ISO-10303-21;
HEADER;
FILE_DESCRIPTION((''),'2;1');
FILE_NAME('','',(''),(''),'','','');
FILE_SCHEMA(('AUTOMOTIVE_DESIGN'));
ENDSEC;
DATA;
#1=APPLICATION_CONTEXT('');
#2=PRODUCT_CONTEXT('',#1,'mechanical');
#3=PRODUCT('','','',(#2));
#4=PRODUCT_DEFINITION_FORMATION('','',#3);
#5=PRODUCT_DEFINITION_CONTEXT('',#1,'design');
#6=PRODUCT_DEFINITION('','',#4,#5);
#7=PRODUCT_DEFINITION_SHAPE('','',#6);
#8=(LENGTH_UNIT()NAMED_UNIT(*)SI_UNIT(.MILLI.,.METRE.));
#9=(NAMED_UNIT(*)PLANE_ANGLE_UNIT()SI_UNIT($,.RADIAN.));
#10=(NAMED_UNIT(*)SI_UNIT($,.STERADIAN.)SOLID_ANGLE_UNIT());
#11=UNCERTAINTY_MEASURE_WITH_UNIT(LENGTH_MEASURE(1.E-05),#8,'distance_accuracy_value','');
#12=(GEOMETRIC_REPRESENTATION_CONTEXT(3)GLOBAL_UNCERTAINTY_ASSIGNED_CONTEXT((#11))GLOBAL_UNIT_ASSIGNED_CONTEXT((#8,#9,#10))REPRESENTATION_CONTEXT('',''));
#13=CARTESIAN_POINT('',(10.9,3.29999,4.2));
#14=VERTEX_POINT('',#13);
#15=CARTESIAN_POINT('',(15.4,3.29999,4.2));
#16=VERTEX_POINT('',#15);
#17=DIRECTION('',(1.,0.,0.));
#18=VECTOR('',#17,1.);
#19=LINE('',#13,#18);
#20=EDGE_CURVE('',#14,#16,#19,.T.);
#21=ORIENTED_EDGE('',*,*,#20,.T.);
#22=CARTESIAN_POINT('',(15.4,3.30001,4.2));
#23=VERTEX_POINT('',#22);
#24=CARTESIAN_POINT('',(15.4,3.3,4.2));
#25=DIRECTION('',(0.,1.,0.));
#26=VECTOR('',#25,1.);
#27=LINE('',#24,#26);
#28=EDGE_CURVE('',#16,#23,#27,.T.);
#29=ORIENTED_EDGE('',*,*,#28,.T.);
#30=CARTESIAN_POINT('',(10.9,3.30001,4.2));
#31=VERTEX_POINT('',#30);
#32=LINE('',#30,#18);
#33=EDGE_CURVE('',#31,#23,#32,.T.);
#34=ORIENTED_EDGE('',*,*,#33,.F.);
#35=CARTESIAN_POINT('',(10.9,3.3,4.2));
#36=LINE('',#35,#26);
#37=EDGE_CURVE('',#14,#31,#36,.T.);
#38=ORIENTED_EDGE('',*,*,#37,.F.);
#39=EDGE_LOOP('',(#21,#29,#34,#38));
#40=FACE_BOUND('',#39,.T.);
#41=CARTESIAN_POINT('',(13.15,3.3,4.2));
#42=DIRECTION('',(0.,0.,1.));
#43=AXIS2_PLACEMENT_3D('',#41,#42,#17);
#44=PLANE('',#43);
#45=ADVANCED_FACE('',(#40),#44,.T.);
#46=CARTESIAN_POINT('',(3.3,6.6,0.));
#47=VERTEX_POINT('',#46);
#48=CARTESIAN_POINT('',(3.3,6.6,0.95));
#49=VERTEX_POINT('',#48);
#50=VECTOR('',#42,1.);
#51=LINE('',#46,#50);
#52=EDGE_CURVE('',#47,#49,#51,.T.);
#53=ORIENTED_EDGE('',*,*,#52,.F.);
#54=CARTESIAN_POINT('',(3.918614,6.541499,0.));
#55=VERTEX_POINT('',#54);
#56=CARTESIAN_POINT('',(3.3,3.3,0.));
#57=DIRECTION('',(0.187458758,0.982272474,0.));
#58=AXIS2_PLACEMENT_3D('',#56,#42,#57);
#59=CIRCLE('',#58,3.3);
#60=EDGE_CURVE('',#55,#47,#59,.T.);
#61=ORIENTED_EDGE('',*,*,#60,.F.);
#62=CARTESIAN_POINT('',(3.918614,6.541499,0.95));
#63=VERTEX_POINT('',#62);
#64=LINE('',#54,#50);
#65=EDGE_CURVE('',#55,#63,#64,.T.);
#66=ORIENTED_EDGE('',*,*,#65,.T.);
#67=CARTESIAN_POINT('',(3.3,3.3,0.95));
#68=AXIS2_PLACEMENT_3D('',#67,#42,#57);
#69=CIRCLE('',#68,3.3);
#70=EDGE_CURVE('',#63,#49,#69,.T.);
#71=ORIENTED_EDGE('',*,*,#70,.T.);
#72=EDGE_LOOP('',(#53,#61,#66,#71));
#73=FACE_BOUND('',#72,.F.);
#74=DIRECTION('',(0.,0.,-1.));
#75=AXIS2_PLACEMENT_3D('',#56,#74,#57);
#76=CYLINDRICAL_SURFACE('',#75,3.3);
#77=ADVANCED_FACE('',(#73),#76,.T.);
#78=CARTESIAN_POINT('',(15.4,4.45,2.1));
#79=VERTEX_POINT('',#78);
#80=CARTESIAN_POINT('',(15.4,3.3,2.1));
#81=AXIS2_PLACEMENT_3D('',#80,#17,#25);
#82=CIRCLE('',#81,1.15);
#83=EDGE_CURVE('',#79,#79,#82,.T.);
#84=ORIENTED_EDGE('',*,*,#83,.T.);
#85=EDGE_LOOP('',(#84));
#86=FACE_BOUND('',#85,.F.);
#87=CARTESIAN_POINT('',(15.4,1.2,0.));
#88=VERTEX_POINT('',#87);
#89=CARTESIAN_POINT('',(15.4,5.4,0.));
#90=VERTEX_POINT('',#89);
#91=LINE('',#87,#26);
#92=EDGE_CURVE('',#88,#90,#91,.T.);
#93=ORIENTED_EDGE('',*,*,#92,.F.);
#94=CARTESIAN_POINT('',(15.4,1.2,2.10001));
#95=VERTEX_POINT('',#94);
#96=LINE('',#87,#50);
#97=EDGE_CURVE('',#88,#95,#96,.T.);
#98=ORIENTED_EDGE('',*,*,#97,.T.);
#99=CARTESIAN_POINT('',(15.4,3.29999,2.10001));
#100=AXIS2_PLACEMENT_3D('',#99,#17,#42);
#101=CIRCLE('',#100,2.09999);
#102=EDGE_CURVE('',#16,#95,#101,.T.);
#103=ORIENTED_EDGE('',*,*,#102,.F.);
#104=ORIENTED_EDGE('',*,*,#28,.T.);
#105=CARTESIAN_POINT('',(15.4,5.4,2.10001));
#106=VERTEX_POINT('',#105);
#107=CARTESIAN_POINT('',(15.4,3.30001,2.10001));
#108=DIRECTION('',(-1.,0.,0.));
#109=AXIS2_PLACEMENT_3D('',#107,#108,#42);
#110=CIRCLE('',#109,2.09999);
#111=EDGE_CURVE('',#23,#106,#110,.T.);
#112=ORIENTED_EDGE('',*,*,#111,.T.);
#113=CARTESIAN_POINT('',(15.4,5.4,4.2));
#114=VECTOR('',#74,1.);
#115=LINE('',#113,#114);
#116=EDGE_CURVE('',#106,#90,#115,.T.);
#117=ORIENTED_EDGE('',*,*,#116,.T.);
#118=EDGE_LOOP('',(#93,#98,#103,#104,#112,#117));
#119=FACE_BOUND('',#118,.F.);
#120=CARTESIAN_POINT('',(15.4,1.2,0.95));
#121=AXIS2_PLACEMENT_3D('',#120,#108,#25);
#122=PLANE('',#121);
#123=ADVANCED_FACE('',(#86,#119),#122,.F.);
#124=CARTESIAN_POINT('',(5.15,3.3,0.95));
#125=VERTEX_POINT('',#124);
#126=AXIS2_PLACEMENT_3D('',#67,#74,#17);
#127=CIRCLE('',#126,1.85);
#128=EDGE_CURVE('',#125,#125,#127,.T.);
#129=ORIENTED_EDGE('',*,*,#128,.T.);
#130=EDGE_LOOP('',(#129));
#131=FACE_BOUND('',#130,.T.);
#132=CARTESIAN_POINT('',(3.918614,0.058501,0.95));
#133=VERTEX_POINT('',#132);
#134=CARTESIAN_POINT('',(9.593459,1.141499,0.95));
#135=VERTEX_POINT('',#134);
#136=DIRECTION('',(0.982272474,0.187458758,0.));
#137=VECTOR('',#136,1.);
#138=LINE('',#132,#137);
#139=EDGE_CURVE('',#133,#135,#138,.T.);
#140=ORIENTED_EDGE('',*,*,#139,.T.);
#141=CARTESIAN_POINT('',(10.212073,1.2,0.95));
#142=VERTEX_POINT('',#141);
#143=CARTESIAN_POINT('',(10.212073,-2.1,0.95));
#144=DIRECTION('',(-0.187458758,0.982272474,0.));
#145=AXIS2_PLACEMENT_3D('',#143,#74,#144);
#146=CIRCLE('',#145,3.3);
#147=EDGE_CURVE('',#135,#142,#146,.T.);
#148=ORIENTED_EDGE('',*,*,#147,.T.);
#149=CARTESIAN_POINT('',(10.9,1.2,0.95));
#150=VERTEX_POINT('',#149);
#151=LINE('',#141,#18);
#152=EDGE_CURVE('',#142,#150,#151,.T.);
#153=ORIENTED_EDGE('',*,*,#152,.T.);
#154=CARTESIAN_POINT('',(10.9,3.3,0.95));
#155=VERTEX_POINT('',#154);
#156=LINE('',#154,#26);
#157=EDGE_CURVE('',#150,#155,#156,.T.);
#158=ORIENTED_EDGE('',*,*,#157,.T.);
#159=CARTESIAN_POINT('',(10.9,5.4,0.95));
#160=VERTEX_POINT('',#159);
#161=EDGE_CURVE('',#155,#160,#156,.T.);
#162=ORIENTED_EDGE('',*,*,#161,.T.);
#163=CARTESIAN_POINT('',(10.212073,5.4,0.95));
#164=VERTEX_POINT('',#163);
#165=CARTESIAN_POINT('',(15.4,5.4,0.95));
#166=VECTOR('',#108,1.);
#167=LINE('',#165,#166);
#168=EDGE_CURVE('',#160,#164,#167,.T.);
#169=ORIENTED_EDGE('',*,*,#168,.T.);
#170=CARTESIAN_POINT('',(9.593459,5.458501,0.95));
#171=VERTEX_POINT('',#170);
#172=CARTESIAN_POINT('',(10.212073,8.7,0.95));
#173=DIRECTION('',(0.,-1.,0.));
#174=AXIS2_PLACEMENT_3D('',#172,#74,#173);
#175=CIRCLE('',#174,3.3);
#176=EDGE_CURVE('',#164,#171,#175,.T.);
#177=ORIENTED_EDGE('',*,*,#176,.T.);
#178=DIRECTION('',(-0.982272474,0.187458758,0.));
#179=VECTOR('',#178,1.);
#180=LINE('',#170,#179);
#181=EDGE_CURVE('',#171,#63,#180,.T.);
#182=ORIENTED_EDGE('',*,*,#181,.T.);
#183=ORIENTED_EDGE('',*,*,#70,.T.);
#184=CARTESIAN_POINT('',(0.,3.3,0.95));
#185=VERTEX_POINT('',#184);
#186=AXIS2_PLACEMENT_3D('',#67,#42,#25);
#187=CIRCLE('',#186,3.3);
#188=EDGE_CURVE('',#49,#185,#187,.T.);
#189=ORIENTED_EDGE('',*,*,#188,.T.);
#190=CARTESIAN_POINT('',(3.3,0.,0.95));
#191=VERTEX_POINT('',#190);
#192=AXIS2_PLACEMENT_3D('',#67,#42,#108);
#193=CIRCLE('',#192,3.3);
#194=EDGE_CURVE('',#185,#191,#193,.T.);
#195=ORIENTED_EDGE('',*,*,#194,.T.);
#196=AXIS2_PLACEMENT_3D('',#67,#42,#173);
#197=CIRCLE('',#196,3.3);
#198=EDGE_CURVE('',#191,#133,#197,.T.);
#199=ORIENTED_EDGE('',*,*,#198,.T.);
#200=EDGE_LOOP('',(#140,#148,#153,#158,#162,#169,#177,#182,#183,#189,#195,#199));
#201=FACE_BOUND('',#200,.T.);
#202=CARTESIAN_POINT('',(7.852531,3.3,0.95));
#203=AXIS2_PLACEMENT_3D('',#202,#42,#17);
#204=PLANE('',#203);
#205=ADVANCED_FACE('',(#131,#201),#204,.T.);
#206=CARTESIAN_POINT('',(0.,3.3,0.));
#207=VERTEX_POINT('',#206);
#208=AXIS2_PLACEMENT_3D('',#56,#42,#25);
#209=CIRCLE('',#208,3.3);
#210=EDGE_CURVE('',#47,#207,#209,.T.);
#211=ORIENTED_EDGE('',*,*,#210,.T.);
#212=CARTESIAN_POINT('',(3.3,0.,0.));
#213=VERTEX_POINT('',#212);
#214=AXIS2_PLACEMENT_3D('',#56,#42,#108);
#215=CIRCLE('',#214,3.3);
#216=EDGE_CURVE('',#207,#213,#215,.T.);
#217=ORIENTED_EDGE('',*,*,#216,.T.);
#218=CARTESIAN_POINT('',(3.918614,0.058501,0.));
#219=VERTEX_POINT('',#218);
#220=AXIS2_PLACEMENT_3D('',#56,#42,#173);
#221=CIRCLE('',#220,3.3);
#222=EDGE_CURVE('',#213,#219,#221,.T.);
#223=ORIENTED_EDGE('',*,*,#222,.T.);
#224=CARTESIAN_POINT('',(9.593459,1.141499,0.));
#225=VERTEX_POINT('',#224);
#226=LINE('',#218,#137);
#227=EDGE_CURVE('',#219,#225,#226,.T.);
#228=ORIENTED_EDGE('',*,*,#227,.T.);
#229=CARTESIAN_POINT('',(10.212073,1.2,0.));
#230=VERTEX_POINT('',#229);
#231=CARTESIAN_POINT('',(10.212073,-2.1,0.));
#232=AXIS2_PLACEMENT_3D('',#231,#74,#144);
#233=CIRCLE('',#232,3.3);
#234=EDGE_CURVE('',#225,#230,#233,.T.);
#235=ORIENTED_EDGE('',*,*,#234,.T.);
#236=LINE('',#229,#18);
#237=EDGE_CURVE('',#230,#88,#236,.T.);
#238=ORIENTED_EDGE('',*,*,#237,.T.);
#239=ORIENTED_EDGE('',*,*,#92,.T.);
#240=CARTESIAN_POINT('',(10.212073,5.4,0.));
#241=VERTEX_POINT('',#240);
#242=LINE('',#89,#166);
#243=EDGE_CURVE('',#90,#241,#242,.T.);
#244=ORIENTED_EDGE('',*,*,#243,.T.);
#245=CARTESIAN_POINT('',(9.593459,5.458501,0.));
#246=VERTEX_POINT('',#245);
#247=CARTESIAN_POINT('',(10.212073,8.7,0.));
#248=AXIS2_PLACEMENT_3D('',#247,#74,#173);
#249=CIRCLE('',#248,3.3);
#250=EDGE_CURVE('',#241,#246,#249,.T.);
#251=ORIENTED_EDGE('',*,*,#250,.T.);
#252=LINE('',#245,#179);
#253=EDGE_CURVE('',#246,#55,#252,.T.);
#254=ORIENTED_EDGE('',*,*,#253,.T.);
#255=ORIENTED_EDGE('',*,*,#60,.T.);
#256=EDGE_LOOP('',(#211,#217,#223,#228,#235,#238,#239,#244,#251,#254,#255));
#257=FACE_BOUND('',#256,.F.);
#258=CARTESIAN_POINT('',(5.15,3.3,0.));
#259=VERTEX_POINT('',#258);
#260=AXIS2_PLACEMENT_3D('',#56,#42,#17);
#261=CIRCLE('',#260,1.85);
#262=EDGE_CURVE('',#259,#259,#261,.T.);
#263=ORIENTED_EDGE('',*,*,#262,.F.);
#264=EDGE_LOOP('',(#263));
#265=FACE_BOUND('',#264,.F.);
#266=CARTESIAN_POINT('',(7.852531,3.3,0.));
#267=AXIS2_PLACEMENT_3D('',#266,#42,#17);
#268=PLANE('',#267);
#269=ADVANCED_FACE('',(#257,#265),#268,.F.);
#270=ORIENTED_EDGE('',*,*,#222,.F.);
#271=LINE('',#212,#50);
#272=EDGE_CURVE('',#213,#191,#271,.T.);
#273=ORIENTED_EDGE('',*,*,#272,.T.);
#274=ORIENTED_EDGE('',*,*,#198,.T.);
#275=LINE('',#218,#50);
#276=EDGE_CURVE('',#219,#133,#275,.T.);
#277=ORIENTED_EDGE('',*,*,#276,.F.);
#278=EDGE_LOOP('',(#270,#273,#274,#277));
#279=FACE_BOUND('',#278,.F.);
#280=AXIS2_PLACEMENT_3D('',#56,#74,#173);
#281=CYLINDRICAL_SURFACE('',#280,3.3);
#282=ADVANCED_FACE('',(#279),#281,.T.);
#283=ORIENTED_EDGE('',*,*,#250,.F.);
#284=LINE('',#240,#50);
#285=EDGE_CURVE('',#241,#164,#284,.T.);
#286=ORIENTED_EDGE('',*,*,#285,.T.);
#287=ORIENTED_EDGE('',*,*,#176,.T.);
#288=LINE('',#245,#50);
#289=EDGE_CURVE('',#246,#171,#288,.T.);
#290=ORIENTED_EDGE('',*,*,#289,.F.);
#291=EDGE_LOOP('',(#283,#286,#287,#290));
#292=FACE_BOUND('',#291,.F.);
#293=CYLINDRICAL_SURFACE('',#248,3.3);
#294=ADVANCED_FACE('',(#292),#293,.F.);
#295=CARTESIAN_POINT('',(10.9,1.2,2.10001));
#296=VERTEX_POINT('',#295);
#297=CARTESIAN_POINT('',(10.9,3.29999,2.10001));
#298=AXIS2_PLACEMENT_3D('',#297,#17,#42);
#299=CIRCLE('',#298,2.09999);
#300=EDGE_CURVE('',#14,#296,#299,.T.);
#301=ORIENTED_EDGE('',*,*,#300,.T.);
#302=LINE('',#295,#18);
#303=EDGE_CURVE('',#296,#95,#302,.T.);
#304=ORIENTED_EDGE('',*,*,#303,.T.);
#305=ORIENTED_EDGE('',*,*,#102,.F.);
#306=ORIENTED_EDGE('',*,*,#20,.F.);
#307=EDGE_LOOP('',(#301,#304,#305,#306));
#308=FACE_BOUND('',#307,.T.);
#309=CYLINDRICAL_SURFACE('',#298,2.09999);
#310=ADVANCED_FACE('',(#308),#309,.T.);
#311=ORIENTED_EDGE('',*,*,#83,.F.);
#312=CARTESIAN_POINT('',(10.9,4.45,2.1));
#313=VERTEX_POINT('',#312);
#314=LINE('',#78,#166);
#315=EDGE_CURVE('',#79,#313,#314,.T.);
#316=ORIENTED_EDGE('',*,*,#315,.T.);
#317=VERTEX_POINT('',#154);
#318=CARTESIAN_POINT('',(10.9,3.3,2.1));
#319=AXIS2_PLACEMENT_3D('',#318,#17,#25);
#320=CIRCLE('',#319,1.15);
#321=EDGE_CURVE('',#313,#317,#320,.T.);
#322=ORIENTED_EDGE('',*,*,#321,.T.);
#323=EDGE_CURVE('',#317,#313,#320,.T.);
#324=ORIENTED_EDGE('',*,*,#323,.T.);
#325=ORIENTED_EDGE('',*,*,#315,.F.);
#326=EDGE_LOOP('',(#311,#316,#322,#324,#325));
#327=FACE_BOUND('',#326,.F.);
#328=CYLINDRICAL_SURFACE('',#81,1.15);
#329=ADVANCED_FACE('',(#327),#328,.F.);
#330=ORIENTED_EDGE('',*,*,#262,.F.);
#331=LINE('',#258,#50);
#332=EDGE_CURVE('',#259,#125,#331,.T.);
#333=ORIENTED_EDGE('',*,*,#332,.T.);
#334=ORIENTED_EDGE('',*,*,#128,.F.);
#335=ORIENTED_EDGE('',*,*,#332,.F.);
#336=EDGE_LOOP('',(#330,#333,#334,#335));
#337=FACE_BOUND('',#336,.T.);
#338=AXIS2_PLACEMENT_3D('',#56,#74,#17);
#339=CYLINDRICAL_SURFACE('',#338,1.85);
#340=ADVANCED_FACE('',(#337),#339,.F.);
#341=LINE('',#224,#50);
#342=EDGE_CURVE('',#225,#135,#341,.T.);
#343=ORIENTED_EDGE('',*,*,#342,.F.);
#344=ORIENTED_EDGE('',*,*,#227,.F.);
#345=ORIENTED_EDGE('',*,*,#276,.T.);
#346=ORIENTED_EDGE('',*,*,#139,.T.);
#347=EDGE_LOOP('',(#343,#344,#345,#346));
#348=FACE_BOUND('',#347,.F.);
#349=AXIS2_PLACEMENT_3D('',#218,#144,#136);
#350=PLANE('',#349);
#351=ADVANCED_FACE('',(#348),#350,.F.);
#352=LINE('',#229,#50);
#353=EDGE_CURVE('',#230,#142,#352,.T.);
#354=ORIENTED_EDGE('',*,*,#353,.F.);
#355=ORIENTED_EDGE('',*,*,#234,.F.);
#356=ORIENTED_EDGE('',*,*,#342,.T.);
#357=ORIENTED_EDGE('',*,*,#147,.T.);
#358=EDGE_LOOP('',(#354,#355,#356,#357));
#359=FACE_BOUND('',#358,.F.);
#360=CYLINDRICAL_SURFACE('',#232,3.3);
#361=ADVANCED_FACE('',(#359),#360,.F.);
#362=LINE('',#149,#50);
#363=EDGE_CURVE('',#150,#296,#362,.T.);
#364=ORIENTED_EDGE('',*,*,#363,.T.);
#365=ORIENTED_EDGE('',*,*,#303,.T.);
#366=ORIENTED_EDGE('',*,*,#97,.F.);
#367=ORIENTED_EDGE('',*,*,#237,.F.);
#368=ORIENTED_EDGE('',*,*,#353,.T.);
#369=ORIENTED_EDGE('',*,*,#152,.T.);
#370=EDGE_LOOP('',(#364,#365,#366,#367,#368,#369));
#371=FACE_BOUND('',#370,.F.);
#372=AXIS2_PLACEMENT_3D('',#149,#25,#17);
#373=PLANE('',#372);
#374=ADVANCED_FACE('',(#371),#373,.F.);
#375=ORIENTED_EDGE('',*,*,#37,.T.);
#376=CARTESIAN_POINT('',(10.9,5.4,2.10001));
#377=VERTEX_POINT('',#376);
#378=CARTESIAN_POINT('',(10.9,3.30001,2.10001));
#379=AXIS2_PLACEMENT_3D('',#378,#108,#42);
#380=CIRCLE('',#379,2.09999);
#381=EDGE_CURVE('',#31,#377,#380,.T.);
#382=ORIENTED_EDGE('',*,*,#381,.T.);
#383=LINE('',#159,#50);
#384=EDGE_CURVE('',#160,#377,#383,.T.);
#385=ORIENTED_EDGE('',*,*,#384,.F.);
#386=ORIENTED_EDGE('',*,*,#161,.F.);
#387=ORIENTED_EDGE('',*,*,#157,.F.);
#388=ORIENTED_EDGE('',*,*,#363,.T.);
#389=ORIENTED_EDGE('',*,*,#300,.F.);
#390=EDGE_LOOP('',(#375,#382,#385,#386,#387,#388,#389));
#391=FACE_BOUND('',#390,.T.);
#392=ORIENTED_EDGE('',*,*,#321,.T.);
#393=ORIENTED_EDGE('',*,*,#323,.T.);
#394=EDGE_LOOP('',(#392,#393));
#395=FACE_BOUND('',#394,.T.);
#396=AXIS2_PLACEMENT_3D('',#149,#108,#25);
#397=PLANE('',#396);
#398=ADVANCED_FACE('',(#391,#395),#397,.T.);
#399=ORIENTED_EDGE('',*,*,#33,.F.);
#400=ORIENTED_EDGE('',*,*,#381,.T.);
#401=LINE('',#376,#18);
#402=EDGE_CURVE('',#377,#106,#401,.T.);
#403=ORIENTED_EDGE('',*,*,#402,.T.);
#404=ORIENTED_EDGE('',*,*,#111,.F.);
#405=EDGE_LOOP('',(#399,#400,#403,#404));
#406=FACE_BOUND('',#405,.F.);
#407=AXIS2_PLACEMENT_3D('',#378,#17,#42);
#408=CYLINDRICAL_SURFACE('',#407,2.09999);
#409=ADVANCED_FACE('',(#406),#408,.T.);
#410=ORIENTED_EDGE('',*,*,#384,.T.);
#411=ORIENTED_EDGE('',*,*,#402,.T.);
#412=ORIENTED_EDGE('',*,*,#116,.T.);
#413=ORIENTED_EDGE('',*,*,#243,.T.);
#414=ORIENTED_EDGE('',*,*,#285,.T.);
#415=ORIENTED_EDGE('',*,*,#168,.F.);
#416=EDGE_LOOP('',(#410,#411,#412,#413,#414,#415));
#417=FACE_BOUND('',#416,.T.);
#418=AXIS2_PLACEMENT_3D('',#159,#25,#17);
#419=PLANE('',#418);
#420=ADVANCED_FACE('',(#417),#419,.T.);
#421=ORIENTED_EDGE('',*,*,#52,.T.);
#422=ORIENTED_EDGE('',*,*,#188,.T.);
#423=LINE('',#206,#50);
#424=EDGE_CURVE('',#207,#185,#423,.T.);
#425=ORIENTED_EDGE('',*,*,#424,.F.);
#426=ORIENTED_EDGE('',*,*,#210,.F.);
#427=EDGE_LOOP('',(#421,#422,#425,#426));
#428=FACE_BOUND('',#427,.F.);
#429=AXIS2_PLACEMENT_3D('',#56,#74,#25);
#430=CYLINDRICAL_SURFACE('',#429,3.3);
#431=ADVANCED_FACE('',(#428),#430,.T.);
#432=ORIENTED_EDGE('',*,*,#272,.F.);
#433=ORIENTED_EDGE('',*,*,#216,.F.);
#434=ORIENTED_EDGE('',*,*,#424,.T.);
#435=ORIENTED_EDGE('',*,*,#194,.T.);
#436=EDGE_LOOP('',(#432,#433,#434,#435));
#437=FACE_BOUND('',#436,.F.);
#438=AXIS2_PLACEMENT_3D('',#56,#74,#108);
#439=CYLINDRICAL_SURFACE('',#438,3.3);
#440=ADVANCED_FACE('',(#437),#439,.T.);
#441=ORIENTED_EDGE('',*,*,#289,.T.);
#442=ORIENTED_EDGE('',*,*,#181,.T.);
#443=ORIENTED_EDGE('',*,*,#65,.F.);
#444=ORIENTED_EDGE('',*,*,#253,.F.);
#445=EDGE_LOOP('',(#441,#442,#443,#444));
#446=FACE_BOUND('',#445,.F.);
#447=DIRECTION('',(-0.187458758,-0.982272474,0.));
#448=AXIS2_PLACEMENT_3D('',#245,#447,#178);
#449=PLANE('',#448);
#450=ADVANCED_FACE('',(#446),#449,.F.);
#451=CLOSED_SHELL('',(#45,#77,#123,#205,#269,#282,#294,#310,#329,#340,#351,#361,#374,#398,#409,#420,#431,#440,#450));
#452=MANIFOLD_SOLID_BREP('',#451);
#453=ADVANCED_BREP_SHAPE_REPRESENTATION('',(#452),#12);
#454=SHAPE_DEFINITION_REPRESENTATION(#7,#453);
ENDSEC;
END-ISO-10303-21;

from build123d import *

# Parameters (mm, degrees)
F0_R     = 1.85
F1_DEPTH = 0.95
F2_W     = 4.5
F2_H     = 4.2
F3_DEPTH = 3.25
F4_R     = 2.09999
F5_R     = 1.15
F6_DEPTH = 25


# Not quite as in the source:
# - a fillet or chamfer is up to 0.001 mm smaller than in the source, because OpenCascade refuses the exact size


with BuildPart() as f1:
    # F0 (on Top) → F1 (new body)
    with BuildSketch(Plane.XY):
        with BuildLine():
            Line((10.9, 1.2), (15.4, 1.2))
            Line((15.4, 1.2), (15.4, 5.4))
            Line((15.4, 5.4), (10.9, 5.4))
            Line((10.9, 5.4), (10.2120730928, 5.4))
            ThreePointArc((10.2120730928, 5.4), (9.9013861494, 5.4146577616), (9.5934591909, 5.4585008344))
            Line((9.5934591909, 5.4585008344), (3.9186139019, 6.5414991656))
            ThreePointArc((3.9186139019, 6.5414991656), (3.6106869434, 6.5853422384), (3.3, 6.6))
            ThreePointArc((3.3, 6.6), (0.9665476221, 5.6334523779), (0, 3.3))
            ThreePointArc((0, 3.3), (0.9665476221, 0.9665476221), (3.3, 0))
            ThreePointArc((3.3, 0), (3.6106869434, 0.0146577616), (3.9186139019, 0.0585008344))
            Line((3.9186139019, 0.0585008344), (9.5934591909, 1.1414991656))
            ThreePointArc((9.5934591909, 1.1414991656), (9.9013861494, 1.1853422384), (10.2120730928, 1.2))
            Line((10.2120730928, 1.2), (10.9, 1.2))
        make_face()
        with Locations((3.3, 3.3)):
            Circle(F0_R, mode=Mode.SUBTRACT)
    extrude(amount=F1_DEPTH)

    # F2 (on face) → F3 (join)
    with BuildSketch(Plane.XY.offset(0.95)):
        with Locations((13.15, 3.3)):
            Rectangle(F2_W, F2_H)
    extrude(amount=F3_DEPTH)

    # F4 (radius 2.1 in the source; OpenCascade refuses exactly that, so slightly less here)
    f4_edges = [f1.edges().sort_by_distance(p)[0] for p in [
        (13.15, 5.4, 4.2),
        (13.15, 1.2, 4.2),
    ]]
    fillet(f4_edges, radius=F4_R)

    # F5 (on face) → F6 (cut)
    with BuildSketch(Plane.YZ.offset(15.4)):
        with Locations((3.3, 2.1)):
            Circle(F5_R)
    extrude(amount=-F6_DEPTH, mode=Mode.SUBTRACT)


solid = f1.part
